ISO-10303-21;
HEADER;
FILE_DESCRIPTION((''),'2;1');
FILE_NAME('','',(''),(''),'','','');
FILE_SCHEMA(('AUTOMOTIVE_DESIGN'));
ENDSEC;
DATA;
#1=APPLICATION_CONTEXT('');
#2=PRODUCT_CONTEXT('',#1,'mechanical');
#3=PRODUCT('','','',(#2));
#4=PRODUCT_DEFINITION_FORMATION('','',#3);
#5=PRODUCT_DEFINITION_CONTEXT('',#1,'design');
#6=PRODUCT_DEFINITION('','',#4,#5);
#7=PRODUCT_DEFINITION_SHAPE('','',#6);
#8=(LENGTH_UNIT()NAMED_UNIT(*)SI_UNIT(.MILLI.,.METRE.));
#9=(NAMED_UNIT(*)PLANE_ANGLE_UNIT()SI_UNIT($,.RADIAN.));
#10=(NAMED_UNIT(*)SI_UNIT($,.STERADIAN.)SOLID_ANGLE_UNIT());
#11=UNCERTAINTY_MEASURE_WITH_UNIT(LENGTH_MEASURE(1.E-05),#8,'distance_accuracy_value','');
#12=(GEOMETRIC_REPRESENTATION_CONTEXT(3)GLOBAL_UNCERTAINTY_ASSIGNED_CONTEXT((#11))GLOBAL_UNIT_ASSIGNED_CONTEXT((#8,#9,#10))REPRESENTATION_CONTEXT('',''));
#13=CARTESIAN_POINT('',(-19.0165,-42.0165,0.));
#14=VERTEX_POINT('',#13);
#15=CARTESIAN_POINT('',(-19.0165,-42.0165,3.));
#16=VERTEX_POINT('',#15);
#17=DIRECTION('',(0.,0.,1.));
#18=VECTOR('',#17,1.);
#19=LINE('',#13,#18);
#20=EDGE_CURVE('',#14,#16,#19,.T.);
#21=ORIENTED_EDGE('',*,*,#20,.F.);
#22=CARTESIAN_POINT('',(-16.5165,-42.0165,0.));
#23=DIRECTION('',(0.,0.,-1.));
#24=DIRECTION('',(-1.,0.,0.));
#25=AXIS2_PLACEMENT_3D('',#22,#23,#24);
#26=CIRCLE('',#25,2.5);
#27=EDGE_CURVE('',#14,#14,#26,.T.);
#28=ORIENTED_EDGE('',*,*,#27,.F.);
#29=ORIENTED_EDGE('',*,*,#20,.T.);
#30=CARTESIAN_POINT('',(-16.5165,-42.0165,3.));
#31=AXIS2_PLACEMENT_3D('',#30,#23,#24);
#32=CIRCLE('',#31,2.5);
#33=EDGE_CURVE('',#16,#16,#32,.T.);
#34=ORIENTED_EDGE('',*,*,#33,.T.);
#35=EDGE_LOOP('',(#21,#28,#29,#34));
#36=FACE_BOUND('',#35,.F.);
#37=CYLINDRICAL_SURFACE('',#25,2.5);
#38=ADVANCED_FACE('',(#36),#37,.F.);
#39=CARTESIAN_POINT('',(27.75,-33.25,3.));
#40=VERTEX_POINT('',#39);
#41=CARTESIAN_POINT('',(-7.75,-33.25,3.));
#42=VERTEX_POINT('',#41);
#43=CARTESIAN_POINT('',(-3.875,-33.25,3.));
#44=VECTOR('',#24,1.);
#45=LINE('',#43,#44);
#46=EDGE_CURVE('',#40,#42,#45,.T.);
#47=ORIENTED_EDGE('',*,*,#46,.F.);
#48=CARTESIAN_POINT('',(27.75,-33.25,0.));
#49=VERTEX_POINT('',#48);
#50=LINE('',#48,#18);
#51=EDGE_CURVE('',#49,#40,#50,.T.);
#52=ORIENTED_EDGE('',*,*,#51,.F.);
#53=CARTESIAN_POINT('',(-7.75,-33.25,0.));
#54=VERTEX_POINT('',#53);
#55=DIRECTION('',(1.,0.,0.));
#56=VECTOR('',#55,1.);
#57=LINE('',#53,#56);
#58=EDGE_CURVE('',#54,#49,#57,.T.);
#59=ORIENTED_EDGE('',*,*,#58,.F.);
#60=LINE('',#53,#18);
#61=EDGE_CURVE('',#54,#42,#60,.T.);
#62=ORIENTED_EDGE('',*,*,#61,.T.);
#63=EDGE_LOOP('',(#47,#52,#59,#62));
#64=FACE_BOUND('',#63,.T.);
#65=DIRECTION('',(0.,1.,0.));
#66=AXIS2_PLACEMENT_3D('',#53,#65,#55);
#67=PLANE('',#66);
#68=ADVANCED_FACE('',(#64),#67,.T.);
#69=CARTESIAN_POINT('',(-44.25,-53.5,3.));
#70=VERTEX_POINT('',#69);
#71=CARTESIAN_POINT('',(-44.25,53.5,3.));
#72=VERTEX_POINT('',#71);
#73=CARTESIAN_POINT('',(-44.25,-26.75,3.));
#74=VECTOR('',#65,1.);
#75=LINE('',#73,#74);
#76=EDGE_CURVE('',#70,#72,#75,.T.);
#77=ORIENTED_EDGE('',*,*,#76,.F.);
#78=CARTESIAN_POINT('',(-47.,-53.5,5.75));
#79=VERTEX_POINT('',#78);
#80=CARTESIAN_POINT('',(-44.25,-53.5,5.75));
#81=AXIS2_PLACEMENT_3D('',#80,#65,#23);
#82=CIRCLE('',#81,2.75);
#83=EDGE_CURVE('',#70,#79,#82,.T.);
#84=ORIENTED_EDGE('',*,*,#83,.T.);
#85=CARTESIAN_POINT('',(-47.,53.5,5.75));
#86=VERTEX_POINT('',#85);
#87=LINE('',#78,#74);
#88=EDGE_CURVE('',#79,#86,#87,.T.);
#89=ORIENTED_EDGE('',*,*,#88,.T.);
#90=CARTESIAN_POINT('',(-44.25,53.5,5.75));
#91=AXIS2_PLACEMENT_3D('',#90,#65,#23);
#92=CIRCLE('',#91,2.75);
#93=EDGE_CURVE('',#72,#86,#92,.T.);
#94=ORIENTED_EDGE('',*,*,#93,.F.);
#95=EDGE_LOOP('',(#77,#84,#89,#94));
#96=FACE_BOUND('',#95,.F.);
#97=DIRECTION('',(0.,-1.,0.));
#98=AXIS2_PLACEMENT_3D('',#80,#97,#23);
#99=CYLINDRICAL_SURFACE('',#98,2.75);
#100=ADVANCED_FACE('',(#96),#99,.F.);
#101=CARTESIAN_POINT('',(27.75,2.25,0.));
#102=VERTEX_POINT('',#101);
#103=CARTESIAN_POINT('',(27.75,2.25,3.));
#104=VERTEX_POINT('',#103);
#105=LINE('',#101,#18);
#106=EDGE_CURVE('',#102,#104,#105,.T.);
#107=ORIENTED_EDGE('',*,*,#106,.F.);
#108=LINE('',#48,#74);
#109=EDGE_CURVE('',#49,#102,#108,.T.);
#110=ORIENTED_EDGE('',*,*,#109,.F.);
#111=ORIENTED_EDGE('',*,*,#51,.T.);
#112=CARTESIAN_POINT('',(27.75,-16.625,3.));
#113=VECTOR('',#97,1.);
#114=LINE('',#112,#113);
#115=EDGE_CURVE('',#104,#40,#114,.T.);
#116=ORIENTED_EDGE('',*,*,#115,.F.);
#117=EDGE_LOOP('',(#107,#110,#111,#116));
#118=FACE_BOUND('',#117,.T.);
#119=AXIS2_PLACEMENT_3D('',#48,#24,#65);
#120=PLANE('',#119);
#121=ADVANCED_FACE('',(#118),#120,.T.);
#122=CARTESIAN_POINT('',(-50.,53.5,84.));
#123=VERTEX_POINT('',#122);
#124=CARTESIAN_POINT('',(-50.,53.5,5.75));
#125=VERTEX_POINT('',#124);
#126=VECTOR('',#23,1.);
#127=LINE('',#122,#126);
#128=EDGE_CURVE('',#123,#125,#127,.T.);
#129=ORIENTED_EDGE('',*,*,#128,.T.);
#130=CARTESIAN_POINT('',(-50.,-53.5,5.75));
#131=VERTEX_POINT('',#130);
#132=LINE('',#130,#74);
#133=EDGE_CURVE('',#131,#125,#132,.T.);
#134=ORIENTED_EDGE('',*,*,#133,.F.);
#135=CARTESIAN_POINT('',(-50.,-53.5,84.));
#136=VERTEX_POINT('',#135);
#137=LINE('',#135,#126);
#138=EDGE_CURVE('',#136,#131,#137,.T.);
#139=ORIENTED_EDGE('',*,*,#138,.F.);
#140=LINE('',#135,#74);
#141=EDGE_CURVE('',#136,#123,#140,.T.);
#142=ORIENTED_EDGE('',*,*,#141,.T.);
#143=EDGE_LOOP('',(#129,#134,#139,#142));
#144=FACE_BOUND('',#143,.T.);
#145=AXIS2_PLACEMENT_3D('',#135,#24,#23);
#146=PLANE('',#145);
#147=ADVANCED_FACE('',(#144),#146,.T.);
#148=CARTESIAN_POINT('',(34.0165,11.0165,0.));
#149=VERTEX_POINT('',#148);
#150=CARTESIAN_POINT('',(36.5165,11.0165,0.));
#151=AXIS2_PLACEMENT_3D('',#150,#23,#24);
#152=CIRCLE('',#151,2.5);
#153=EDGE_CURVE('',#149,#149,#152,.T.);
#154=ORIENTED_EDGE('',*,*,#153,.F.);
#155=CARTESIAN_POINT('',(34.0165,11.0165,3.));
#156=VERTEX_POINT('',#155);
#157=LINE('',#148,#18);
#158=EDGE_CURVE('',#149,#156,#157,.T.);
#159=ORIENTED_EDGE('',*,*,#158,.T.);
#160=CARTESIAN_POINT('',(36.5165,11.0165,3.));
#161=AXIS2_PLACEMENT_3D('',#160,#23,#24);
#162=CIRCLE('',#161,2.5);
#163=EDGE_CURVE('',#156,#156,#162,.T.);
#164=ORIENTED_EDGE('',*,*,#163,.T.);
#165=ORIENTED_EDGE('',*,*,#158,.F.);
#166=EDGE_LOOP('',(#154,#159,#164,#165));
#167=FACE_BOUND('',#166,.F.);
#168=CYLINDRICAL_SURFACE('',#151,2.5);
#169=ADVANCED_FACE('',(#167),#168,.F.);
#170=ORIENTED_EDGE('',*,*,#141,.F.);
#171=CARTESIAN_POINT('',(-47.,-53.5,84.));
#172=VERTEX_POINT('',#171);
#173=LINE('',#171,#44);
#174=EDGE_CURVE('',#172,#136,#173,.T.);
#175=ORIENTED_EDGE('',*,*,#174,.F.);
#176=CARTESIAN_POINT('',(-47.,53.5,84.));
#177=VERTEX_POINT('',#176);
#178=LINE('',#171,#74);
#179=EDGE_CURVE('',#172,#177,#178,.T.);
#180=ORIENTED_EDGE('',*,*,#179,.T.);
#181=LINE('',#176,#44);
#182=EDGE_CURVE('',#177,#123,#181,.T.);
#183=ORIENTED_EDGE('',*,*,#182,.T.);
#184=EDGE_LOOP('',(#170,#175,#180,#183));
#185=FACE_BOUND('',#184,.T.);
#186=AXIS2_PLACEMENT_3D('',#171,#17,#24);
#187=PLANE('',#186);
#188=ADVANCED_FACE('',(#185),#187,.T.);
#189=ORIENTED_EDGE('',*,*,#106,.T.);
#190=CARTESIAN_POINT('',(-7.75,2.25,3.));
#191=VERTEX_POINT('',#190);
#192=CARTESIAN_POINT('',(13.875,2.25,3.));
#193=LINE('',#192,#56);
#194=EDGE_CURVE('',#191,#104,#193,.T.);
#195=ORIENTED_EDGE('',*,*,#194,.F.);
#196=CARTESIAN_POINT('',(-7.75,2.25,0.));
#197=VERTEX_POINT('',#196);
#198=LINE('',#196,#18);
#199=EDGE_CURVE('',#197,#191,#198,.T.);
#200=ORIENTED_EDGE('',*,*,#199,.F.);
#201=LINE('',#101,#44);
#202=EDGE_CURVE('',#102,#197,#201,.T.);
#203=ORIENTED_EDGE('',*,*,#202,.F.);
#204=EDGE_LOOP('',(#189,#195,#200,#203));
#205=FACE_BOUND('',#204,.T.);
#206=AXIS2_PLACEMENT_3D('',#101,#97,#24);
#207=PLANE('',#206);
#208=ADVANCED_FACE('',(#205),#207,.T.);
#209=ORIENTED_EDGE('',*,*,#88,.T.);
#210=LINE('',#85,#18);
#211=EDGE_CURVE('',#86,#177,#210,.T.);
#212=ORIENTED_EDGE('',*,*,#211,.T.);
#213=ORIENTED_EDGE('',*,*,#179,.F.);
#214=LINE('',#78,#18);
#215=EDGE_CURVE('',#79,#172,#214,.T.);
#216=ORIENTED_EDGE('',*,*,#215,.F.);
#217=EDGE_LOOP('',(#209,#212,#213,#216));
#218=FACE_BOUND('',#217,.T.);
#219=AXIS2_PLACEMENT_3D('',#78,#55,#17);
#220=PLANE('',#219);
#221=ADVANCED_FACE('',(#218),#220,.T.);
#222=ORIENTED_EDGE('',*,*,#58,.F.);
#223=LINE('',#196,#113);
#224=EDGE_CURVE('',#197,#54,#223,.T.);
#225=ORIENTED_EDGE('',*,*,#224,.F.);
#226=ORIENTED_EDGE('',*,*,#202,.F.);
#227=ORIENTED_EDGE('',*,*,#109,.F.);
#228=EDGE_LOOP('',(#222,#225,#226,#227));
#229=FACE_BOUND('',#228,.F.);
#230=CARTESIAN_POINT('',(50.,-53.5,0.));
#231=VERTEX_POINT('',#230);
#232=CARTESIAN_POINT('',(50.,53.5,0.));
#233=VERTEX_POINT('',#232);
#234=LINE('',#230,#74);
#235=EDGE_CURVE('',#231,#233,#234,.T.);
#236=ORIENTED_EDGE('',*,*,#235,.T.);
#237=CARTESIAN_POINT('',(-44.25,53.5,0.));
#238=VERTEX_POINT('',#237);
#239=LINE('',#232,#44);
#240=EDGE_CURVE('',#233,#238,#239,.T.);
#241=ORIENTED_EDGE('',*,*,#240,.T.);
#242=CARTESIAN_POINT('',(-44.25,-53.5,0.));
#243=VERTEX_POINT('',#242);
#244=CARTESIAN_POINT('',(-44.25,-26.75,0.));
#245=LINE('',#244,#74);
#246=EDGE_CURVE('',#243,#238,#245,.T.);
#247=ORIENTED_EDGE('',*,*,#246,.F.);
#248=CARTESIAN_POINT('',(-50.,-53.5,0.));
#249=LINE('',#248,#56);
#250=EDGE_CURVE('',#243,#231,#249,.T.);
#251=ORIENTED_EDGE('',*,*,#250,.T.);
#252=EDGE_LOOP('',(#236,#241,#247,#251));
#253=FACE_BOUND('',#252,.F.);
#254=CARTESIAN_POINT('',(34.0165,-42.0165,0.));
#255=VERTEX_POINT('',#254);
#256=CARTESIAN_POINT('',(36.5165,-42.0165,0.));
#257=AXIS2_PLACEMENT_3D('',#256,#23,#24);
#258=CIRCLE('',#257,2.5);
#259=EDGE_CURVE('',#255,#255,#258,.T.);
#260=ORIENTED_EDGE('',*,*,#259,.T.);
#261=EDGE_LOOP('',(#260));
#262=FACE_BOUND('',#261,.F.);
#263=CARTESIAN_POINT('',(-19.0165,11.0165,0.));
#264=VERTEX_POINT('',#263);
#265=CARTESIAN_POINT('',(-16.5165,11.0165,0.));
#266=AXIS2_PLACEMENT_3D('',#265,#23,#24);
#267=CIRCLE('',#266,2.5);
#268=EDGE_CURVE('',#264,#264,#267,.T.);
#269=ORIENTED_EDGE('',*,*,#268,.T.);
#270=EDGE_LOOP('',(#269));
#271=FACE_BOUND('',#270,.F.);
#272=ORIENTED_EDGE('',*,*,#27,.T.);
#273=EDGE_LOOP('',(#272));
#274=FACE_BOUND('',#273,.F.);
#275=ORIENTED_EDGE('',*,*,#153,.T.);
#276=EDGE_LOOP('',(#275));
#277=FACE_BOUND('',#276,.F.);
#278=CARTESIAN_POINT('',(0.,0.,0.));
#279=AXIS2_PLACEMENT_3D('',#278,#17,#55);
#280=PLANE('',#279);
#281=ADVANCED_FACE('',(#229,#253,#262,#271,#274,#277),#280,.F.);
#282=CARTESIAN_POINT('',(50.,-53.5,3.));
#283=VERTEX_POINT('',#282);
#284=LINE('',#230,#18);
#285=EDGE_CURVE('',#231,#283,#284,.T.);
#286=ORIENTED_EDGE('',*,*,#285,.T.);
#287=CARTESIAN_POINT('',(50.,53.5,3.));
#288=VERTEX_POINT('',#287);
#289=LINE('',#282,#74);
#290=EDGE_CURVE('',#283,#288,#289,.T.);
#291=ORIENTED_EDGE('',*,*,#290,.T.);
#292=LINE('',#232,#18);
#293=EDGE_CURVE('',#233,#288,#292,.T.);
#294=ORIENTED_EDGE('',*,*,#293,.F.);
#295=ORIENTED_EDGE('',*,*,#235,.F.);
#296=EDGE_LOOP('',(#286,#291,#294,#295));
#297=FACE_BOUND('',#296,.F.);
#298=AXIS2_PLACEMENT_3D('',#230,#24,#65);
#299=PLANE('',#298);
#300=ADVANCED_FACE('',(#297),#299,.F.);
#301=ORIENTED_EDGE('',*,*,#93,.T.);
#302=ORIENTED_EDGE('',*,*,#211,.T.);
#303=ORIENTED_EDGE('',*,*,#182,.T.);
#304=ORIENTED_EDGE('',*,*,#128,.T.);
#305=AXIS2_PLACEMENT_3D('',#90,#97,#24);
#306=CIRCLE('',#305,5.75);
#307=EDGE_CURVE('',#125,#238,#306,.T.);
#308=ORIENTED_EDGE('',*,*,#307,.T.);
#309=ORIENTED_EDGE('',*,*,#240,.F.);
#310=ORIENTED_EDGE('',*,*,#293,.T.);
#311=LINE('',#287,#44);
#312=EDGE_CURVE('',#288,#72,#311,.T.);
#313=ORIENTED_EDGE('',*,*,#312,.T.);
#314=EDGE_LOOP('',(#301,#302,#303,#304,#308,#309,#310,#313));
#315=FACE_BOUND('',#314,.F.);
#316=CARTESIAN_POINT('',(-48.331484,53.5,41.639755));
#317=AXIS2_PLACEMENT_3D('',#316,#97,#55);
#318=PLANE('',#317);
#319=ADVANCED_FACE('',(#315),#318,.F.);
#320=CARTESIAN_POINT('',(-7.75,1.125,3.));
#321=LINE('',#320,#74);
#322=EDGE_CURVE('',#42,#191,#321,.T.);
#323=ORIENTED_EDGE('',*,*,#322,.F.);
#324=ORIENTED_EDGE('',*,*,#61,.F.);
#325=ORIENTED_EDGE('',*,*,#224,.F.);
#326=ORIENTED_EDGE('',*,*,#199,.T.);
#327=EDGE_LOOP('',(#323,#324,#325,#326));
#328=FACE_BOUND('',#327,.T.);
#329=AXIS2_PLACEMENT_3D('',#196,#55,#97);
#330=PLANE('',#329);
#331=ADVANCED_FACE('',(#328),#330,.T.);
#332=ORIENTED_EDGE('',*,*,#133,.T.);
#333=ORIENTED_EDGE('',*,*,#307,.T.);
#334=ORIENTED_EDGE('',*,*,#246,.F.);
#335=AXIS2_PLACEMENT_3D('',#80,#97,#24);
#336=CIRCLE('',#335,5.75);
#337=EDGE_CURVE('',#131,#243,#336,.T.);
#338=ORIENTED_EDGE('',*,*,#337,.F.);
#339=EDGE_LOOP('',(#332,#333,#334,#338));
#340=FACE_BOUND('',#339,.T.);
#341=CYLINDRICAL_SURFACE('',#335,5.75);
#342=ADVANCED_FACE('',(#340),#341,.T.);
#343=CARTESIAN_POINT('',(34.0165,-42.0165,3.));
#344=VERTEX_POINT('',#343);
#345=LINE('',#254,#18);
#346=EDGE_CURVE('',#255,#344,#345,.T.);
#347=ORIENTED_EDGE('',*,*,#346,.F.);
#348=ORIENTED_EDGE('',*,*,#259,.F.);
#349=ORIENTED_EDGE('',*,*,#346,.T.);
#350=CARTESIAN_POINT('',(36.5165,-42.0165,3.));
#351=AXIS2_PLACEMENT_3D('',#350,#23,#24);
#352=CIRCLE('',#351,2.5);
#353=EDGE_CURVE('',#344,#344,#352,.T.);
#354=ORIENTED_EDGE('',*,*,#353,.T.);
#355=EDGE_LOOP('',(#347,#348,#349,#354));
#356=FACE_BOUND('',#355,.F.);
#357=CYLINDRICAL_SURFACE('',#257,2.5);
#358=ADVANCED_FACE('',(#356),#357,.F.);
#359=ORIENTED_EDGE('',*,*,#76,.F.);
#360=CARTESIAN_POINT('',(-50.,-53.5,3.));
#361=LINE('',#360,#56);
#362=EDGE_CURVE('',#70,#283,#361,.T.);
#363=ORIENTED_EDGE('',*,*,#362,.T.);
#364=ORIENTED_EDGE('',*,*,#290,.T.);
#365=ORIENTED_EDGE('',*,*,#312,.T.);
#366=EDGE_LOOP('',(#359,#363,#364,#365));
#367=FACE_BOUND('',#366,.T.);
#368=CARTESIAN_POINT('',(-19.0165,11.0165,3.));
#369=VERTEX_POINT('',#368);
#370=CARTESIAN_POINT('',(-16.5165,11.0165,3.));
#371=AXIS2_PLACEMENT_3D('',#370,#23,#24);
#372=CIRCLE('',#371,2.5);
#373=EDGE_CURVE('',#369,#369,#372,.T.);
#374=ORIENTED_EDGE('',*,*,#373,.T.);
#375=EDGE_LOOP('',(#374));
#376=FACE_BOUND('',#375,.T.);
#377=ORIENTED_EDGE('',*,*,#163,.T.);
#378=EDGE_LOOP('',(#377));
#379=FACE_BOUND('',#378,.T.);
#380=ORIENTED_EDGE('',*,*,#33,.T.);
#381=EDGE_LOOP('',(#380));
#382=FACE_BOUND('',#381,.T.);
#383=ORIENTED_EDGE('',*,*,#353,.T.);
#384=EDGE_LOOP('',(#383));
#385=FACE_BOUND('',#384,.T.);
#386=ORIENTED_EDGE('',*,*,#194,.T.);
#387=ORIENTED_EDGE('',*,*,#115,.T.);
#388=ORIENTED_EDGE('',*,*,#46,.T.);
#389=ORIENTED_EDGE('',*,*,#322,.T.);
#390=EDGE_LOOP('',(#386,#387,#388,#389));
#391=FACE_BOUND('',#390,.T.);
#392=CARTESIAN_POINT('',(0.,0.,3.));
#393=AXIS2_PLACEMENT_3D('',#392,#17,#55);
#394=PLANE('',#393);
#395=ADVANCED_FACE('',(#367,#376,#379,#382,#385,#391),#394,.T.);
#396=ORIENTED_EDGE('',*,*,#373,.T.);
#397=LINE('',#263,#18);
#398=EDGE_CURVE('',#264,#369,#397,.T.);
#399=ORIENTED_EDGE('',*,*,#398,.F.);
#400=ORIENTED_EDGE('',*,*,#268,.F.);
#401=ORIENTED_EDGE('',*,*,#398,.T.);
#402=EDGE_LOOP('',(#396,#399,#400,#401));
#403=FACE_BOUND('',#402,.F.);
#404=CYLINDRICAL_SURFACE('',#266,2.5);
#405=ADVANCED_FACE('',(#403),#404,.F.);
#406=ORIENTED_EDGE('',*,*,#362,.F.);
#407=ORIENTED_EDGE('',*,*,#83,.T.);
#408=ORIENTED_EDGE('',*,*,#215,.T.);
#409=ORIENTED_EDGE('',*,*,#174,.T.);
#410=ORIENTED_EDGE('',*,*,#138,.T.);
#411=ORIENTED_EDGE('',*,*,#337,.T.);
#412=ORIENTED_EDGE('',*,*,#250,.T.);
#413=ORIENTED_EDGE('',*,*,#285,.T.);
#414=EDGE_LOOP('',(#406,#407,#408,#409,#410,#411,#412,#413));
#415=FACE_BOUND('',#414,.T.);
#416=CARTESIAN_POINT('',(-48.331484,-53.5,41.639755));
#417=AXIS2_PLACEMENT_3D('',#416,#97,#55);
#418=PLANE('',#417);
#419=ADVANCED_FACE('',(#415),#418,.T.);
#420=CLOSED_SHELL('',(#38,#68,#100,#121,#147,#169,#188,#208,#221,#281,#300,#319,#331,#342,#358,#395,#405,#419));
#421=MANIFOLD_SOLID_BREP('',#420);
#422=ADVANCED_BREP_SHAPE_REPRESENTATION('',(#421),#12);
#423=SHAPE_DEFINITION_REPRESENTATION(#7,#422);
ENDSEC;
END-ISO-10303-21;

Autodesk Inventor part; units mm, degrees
ref_plane "YZ Plane" through (0, 0, 0) normal (1, 0, 0) x (0, 1, 0)
ref_plane "XZ Plane" through (0, 0, 0) normal (0, 1, 0) x (-1, 0, 0)
ref_plane "XY Plane" through (0, 0, 0) normal (0, 0, 1) x (1, 0, 0)
sketch "Sketch1" plane through (0, 0, 0) normal (0, 0, 1) x (1, 0, 0)
  line L0 (-50, -53.5) -> (50, -53.5)
  line L1 (50, -53.5) -> (50, 53.5)
  line L2 (50, 53.5) -> (-50, 53.5)
  line L3 (-50, 53.5) -> (-50, -53.5)
  line L4 (-50, -53.5) -> (50, 53.5) construction
  line L5 (50, -53.5) -> (-50, 53.5) construction
  point P0 (0, 0)
  dimension "d154" = 100
  dimension "d155" = 107
extrude "Plate5" add sketch "Sketch1" along normal blind 3
sketch "Sketch10" plane through (0, 0, 0) normal (0, 0, -1) x (-1, 0, 0)
  line L0 (7.75, -33.25) -> (-27.75, -33.25)
  line L1 (-27.75, -33.25) -> (-27.75, 2.25)
  line L2 (-27.75, 2.25) -> (7.75, 2.25)
  line L3 (7.75, 2.25) -> (7.75, -33.25)
  line L4 (7.75, -33.25) -> (-27.75, 2.25) construction
  line L5 (-27.75, -33.25) -> (7.75, 2.25) construction
  circle A0 centre (16.5165, -42.0165) radius 2.5
  circle A1 centre (-36.5165, -42.0165) radius 2.5
  circle A2 centre (-36.5165, 11.0165) radius 2.5
  circle A3 centre (16.5165, 11.0165) radius 2.5
  circle A4 centre (-10, -15.5) radius 37.5 construction
  line L6 (-27.75, -33.25) -> (-36.5165, -42.0165) construction
  line L7 (-50, -53.5) -> (-50, 53.5) projected
  line L8 (50, -53.5) -> (-50, -53.5) projected
  line L9 (50, 53.5) -> (50, -53.5) projected
  line L10 (-50, 53.5) -> (50, 53.5) projected
  point P0 (0, 0)
  dimension "d187" = 35.5
  dimension "d188" = 35.5
  dimension "d189" = 5
  dimension "d190" = 12.3977
  dimension "d196" = 40
  dimension "d198" = 69
  dimension "d199" = 75
extrude "Cut2" cut sketch "Sketch10" against normal through all contours L0 L1 L2 L3 | A0 | A1 | A2 | A3
sketch "Sketch7" plane through (-47, -53.5, 0) normal (-1, 0, 0) x (0, -1, 0)
  line L0 (-107, 0) -> (0, 0)
  line L1 (0, 0) -> (0, 84)
  line L2 (0, 84) -> (-107, 84)
  line L3 (-107, 84) -> (-107, 0)
edge flange "Flange3" height 84 angle 90 thickness 3 bend radius 2.75 thickness toward (-1, 0, 0) relief round relief width 3 relief depth 1.5 edges at (-50, 0, 3) wall of the first edge with corners at (-47, 53.5, 0) (-47, -53.5, 0) (-47, -53.5, 84) (-47, 53.5, 84)
bend "Bend3"
corner "Corner3"
properties part number "PNS 754 FDS 1200 FLANGE 2 down" material "Stainless Steel"
